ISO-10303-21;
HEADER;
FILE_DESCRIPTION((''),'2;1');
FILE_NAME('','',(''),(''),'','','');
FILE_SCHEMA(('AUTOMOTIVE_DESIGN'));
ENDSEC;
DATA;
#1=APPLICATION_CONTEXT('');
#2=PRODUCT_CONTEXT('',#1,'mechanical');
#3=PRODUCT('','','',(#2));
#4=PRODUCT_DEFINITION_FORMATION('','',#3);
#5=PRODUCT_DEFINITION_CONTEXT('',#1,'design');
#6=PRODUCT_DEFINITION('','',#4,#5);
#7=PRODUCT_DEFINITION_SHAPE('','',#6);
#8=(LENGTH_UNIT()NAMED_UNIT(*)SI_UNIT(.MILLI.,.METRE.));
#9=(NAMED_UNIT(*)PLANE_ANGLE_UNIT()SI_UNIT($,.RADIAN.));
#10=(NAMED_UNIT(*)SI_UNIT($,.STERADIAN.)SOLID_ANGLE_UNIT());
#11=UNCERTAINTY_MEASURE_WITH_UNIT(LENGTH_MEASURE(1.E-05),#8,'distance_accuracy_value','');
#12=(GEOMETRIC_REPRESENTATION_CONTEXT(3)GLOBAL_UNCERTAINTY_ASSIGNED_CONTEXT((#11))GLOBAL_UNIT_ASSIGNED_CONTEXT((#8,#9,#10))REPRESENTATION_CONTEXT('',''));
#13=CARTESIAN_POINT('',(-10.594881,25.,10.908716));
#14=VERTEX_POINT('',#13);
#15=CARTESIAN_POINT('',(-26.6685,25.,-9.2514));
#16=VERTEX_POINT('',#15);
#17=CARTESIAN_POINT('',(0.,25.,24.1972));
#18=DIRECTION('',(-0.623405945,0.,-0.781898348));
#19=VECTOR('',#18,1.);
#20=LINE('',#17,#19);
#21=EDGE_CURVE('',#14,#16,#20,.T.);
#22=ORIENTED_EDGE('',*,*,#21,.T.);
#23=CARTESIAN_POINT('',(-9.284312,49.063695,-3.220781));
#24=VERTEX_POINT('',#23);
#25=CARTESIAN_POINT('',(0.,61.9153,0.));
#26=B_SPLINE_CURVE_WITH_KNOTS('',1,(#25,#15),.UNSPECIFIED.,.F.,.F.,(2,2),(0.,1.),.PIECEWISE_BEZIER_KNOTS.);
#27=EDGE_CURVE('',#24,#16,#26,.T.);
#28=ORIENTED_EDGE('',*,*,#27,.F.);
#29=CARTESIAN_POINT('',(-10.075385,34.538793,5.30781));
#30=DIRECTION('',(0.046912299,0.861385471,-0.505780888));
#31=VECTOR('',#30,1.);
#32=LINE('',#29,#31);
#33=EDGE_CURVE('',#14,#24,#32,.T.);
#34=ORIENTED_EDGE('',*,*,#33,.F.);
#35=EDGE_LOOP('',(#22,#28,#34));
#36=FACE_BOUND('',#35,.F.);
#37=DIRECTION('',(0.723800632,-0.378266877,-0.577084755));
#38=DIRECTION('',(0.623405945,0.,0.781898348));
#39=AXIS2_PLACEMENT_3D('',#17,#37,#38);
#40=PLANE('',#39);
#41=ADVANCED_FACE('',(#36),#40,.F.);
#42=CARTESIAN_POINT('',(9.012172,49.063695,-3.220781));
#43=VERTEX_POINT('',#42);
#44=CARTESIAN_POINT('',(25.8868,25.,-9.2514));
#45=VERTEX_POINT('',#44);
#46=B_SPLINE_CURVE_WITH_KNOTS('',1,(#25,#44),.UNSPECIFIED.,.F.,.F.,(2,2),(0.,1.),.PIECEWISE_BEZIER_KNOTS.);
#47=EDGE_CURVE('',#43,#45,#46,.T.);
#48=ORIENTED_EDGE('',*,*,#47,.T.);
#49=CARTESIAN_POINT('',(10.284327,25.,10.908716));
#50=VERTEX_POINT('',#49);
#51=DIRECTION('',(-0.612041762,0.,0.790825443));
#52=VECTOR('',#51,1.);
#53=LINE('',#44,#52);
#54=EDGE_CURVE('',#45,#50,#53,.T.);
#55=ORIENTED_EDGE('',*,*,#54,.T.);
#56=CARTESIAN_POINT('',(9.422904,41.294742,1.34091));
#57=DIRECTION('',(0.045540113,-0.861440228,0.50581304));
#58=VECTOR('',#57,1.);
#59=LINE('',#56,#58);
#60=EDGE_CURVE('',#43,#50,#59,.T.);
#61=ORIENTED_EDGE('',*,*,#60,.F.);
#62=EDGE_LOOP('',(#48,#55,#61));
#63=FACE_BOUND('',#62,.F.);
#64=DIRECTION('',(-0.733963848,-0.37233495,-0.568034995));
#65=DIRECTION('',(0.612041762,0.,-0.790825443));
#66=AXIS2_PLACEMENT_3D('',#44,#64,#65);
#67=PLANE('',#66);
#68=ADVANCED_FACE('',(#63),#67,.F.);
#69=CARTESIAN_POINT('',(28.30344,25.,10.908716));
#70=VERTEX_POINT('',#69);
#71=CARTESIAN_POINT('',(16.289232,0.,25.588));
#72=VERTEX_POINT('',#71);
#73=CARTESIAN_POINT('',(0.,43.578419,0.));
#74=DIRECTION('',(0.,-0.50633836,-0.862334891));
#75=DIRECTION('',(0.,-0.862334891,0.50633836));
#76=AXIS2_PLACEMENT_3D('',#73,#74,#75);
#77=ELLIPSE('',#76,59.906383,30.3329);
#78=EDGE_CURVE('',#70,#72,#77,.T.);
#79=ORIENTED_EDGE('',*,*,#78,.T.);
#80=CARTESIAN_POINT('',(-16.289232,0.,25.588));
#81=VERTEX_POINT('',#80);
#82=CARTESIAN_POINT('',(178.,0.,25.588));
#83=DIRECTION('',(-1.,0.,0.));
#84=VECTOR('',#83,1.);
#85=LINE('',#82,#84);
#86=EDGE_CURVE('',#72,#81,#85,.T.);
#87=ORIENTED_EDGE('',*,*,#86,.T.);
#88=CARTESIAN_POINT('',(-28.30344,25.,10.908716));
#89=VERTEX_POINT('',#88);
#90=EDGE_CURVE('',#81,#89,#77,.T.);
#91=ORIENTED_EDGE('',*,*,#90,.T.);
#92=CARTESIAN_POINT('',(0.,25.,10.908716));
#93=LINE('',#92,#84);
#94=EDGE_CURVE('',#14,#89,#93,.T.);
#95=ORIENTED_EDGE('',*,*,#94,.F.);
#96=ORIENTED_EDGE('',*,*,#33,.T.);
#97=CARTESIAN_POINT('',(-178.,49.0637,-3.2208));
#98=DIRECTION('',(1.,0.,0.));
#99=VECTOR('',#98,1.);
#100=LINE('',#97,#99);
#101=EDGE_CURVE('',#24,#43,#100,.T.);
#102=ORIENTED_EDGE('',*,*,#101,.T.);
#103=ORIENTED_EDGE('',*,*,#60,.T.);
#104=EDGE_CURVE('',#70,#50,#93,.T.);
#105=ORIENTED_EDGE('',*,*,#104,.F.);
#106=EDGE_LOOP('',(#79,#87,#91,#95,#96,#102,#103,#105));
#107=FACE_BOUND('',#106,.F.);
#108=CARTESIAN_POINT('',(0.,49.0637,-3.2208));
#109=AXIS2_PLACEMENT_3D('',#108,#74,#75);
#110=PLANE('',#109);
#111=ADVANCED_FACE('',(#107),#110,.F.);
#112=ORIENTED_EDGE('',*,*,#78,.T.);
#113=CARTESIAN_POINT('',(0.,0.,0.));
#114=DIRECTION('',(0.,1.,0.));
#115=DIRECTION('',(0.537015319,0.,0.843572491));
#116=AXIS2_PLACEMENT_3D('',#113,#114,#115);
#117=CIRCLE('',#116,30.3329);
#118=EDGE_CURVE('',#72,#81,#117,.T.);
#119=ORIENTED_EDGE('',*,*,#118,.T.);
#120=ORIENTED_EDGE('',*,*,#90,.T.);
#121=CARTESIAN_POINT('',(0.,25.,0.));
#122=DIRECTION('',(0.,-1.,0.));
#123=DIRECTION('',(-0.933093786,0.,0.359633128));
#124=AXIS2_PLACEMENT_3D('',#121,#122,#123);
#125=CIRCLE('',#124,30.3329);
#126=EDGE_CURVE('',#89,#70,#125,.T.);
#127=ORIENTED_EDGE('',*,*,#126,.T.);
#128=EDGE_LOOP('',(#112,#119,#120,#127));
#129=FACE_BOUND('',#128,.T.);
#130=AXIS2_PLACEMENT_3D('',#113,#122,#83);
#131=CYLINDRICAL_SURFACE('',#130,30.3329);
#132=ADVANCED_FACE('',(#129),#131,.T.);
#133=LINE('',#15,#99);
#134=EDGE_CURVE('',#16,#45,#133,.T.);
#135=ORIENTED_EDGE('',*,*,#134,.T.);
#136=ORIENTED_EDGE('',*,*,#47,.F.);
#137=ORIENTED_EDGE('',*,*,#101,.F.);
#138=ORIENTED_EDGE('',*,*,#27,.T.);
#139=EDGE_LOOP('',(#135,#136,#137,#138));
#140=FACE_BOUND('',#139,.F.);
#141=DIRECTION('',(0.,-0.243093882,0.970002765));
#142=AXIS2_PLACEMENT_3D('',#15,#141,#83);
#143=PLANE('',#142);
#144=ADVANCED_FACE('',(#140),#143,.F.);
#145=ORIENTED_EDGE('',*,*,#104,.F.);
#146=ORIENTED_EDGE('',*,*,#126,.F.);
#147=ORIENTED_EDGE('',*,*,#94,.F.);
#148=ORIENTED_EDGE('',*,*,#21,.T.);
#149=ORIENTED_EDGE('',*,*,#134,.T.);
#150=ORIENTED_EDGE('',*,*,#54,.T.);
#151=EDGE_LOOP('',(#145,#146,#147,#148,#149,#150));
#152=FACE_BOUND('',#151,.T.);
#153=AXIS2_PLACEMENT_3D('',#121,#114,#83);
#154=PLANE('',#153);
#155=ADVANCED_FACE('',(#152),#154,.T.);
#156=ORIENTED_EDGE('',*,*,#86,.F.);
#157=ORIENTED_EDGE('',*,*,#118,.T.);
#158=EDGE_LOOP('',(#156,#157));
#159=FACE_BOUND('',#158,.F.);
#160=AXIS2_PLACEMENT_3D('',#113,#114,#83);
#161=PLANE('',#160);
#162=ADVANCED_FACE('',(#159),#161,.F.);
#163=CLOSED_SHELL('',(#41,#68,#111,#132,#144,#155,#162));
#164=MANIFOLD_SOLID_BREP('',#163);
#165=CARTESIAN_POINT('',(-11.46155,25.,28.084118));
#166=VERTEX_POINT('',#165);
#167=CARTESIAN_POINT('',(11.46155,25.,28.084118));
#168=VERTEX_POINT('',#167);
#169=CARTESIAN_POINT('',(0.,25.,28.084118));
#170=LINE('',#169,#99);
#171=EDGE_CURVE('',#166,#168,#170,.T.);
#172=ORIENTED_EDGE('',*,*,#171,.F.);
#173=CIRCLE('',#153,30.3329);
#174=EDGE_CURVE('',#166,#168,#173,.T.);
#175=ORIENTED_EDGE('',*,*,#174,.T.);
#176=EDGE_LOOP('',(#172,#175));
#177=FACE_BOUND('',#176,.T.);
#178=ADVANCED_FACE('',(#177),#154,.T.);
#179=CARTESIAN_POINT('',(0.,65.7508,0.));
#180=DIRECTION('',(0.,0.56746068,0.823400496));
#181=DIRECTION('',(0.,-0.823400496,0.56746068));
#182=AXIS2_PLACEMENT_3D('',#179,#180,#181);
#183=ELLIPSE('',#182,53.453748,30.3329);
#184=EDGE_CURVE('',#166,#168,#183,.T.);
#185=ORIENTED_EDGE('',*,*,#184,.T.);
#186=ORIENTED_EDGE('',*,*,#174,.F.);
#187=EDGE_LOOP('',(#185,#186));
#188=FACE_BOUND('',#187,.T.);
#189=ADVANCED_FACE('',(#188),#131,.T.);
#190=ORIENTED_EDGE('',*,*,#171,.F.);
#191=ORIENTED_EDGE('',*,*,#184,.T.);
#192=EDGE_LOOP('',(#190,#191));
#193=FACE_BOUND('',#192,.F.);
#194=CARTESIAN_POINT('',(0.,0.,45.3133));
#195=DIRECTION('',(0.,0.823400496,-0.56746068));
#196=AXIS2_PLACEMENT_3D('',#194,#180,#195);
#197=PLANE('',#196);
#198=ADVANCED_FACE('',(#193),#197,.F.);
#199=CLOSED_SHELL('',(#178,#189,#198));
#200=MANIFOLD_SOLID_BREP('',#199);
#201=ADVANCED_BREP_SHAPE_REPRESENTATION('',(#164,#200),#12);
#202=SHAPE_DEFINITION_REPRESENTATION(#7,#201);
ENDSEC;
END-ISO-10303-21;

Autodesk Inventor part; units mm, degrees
ref_plane "YZ Plane" through (0, 0, 0) normal (1, 0, 0) x (0, 1, 0)
ref_plane "XZ Plane" through (0, 0, 0) normal (0, 1, 0) x (-1, 0, 0)
ref_plane "XY Plane" through (0, 0, 0) normal (0, 0, 1) x (1, 0, 0)
sketch "Эскиз1" plane through (0, 0, 0) normal (0, 1, 0) x (-1, 0, 0)
  circle A0 centre (0, 0) radius 30.3329
extrude "Выдавливание1" add sketch "Эскиз1" along normal blind 25
sketch "Эскиз2" plane through (0, 25, 0) normal (0, 1, 0) x (1, 0, 0)
  line L0 (0, -24.1972) -> (-26.6685, 9.2514)
  line L1 (-26.6685, 9.2514) -> (25.8868, 9.2514)
  line L2 (25.8868, 9.2514) -> (0, -24.1972)
  point P0 (0, 0)
  point P1 (0, 0)
ref_plane "РабПлоскость1" through (0, 25, 0) normal (0, 1, 0) x (1, 0, 0)
sketch "Эскиз6" plane through (0, 0, 0) normal (1, 0, 0) x (0, 1, 0)
  point P0 (0, 0)
  point P1 (61.9153, 0)
loft "Лофт3" add profiles "Эскиз2" section 1 point at (0, 61.9153, 0)
sketch "Эскиз7" plane through (0, 0, 0) normal (1, 0, 0) x (0, 1, 0)
  line L0 (61.9153, 0) -> (25, -9.2514) projected
  line L1 (49.0637, -3.2208) -> (0, 25.588)
  line L2 (0, -30.3329) -> (0, 30.3329) projected
  line L3 (0, 45.3133) -> (65.7508, 0)
  line L4 (65.7508, 0) -> (51.8075, -4.8318)
  line L5 (51.8075, -4.8318) -> (49.0637, -3.2208)
  line L6 (0, 45.3133) -> (0, 25.588)
  point P0 (0, 0)
extrude "Выдавливание3" cut sketch "Эскиз7" along normal mid plane 356
properties part number "Даник"
